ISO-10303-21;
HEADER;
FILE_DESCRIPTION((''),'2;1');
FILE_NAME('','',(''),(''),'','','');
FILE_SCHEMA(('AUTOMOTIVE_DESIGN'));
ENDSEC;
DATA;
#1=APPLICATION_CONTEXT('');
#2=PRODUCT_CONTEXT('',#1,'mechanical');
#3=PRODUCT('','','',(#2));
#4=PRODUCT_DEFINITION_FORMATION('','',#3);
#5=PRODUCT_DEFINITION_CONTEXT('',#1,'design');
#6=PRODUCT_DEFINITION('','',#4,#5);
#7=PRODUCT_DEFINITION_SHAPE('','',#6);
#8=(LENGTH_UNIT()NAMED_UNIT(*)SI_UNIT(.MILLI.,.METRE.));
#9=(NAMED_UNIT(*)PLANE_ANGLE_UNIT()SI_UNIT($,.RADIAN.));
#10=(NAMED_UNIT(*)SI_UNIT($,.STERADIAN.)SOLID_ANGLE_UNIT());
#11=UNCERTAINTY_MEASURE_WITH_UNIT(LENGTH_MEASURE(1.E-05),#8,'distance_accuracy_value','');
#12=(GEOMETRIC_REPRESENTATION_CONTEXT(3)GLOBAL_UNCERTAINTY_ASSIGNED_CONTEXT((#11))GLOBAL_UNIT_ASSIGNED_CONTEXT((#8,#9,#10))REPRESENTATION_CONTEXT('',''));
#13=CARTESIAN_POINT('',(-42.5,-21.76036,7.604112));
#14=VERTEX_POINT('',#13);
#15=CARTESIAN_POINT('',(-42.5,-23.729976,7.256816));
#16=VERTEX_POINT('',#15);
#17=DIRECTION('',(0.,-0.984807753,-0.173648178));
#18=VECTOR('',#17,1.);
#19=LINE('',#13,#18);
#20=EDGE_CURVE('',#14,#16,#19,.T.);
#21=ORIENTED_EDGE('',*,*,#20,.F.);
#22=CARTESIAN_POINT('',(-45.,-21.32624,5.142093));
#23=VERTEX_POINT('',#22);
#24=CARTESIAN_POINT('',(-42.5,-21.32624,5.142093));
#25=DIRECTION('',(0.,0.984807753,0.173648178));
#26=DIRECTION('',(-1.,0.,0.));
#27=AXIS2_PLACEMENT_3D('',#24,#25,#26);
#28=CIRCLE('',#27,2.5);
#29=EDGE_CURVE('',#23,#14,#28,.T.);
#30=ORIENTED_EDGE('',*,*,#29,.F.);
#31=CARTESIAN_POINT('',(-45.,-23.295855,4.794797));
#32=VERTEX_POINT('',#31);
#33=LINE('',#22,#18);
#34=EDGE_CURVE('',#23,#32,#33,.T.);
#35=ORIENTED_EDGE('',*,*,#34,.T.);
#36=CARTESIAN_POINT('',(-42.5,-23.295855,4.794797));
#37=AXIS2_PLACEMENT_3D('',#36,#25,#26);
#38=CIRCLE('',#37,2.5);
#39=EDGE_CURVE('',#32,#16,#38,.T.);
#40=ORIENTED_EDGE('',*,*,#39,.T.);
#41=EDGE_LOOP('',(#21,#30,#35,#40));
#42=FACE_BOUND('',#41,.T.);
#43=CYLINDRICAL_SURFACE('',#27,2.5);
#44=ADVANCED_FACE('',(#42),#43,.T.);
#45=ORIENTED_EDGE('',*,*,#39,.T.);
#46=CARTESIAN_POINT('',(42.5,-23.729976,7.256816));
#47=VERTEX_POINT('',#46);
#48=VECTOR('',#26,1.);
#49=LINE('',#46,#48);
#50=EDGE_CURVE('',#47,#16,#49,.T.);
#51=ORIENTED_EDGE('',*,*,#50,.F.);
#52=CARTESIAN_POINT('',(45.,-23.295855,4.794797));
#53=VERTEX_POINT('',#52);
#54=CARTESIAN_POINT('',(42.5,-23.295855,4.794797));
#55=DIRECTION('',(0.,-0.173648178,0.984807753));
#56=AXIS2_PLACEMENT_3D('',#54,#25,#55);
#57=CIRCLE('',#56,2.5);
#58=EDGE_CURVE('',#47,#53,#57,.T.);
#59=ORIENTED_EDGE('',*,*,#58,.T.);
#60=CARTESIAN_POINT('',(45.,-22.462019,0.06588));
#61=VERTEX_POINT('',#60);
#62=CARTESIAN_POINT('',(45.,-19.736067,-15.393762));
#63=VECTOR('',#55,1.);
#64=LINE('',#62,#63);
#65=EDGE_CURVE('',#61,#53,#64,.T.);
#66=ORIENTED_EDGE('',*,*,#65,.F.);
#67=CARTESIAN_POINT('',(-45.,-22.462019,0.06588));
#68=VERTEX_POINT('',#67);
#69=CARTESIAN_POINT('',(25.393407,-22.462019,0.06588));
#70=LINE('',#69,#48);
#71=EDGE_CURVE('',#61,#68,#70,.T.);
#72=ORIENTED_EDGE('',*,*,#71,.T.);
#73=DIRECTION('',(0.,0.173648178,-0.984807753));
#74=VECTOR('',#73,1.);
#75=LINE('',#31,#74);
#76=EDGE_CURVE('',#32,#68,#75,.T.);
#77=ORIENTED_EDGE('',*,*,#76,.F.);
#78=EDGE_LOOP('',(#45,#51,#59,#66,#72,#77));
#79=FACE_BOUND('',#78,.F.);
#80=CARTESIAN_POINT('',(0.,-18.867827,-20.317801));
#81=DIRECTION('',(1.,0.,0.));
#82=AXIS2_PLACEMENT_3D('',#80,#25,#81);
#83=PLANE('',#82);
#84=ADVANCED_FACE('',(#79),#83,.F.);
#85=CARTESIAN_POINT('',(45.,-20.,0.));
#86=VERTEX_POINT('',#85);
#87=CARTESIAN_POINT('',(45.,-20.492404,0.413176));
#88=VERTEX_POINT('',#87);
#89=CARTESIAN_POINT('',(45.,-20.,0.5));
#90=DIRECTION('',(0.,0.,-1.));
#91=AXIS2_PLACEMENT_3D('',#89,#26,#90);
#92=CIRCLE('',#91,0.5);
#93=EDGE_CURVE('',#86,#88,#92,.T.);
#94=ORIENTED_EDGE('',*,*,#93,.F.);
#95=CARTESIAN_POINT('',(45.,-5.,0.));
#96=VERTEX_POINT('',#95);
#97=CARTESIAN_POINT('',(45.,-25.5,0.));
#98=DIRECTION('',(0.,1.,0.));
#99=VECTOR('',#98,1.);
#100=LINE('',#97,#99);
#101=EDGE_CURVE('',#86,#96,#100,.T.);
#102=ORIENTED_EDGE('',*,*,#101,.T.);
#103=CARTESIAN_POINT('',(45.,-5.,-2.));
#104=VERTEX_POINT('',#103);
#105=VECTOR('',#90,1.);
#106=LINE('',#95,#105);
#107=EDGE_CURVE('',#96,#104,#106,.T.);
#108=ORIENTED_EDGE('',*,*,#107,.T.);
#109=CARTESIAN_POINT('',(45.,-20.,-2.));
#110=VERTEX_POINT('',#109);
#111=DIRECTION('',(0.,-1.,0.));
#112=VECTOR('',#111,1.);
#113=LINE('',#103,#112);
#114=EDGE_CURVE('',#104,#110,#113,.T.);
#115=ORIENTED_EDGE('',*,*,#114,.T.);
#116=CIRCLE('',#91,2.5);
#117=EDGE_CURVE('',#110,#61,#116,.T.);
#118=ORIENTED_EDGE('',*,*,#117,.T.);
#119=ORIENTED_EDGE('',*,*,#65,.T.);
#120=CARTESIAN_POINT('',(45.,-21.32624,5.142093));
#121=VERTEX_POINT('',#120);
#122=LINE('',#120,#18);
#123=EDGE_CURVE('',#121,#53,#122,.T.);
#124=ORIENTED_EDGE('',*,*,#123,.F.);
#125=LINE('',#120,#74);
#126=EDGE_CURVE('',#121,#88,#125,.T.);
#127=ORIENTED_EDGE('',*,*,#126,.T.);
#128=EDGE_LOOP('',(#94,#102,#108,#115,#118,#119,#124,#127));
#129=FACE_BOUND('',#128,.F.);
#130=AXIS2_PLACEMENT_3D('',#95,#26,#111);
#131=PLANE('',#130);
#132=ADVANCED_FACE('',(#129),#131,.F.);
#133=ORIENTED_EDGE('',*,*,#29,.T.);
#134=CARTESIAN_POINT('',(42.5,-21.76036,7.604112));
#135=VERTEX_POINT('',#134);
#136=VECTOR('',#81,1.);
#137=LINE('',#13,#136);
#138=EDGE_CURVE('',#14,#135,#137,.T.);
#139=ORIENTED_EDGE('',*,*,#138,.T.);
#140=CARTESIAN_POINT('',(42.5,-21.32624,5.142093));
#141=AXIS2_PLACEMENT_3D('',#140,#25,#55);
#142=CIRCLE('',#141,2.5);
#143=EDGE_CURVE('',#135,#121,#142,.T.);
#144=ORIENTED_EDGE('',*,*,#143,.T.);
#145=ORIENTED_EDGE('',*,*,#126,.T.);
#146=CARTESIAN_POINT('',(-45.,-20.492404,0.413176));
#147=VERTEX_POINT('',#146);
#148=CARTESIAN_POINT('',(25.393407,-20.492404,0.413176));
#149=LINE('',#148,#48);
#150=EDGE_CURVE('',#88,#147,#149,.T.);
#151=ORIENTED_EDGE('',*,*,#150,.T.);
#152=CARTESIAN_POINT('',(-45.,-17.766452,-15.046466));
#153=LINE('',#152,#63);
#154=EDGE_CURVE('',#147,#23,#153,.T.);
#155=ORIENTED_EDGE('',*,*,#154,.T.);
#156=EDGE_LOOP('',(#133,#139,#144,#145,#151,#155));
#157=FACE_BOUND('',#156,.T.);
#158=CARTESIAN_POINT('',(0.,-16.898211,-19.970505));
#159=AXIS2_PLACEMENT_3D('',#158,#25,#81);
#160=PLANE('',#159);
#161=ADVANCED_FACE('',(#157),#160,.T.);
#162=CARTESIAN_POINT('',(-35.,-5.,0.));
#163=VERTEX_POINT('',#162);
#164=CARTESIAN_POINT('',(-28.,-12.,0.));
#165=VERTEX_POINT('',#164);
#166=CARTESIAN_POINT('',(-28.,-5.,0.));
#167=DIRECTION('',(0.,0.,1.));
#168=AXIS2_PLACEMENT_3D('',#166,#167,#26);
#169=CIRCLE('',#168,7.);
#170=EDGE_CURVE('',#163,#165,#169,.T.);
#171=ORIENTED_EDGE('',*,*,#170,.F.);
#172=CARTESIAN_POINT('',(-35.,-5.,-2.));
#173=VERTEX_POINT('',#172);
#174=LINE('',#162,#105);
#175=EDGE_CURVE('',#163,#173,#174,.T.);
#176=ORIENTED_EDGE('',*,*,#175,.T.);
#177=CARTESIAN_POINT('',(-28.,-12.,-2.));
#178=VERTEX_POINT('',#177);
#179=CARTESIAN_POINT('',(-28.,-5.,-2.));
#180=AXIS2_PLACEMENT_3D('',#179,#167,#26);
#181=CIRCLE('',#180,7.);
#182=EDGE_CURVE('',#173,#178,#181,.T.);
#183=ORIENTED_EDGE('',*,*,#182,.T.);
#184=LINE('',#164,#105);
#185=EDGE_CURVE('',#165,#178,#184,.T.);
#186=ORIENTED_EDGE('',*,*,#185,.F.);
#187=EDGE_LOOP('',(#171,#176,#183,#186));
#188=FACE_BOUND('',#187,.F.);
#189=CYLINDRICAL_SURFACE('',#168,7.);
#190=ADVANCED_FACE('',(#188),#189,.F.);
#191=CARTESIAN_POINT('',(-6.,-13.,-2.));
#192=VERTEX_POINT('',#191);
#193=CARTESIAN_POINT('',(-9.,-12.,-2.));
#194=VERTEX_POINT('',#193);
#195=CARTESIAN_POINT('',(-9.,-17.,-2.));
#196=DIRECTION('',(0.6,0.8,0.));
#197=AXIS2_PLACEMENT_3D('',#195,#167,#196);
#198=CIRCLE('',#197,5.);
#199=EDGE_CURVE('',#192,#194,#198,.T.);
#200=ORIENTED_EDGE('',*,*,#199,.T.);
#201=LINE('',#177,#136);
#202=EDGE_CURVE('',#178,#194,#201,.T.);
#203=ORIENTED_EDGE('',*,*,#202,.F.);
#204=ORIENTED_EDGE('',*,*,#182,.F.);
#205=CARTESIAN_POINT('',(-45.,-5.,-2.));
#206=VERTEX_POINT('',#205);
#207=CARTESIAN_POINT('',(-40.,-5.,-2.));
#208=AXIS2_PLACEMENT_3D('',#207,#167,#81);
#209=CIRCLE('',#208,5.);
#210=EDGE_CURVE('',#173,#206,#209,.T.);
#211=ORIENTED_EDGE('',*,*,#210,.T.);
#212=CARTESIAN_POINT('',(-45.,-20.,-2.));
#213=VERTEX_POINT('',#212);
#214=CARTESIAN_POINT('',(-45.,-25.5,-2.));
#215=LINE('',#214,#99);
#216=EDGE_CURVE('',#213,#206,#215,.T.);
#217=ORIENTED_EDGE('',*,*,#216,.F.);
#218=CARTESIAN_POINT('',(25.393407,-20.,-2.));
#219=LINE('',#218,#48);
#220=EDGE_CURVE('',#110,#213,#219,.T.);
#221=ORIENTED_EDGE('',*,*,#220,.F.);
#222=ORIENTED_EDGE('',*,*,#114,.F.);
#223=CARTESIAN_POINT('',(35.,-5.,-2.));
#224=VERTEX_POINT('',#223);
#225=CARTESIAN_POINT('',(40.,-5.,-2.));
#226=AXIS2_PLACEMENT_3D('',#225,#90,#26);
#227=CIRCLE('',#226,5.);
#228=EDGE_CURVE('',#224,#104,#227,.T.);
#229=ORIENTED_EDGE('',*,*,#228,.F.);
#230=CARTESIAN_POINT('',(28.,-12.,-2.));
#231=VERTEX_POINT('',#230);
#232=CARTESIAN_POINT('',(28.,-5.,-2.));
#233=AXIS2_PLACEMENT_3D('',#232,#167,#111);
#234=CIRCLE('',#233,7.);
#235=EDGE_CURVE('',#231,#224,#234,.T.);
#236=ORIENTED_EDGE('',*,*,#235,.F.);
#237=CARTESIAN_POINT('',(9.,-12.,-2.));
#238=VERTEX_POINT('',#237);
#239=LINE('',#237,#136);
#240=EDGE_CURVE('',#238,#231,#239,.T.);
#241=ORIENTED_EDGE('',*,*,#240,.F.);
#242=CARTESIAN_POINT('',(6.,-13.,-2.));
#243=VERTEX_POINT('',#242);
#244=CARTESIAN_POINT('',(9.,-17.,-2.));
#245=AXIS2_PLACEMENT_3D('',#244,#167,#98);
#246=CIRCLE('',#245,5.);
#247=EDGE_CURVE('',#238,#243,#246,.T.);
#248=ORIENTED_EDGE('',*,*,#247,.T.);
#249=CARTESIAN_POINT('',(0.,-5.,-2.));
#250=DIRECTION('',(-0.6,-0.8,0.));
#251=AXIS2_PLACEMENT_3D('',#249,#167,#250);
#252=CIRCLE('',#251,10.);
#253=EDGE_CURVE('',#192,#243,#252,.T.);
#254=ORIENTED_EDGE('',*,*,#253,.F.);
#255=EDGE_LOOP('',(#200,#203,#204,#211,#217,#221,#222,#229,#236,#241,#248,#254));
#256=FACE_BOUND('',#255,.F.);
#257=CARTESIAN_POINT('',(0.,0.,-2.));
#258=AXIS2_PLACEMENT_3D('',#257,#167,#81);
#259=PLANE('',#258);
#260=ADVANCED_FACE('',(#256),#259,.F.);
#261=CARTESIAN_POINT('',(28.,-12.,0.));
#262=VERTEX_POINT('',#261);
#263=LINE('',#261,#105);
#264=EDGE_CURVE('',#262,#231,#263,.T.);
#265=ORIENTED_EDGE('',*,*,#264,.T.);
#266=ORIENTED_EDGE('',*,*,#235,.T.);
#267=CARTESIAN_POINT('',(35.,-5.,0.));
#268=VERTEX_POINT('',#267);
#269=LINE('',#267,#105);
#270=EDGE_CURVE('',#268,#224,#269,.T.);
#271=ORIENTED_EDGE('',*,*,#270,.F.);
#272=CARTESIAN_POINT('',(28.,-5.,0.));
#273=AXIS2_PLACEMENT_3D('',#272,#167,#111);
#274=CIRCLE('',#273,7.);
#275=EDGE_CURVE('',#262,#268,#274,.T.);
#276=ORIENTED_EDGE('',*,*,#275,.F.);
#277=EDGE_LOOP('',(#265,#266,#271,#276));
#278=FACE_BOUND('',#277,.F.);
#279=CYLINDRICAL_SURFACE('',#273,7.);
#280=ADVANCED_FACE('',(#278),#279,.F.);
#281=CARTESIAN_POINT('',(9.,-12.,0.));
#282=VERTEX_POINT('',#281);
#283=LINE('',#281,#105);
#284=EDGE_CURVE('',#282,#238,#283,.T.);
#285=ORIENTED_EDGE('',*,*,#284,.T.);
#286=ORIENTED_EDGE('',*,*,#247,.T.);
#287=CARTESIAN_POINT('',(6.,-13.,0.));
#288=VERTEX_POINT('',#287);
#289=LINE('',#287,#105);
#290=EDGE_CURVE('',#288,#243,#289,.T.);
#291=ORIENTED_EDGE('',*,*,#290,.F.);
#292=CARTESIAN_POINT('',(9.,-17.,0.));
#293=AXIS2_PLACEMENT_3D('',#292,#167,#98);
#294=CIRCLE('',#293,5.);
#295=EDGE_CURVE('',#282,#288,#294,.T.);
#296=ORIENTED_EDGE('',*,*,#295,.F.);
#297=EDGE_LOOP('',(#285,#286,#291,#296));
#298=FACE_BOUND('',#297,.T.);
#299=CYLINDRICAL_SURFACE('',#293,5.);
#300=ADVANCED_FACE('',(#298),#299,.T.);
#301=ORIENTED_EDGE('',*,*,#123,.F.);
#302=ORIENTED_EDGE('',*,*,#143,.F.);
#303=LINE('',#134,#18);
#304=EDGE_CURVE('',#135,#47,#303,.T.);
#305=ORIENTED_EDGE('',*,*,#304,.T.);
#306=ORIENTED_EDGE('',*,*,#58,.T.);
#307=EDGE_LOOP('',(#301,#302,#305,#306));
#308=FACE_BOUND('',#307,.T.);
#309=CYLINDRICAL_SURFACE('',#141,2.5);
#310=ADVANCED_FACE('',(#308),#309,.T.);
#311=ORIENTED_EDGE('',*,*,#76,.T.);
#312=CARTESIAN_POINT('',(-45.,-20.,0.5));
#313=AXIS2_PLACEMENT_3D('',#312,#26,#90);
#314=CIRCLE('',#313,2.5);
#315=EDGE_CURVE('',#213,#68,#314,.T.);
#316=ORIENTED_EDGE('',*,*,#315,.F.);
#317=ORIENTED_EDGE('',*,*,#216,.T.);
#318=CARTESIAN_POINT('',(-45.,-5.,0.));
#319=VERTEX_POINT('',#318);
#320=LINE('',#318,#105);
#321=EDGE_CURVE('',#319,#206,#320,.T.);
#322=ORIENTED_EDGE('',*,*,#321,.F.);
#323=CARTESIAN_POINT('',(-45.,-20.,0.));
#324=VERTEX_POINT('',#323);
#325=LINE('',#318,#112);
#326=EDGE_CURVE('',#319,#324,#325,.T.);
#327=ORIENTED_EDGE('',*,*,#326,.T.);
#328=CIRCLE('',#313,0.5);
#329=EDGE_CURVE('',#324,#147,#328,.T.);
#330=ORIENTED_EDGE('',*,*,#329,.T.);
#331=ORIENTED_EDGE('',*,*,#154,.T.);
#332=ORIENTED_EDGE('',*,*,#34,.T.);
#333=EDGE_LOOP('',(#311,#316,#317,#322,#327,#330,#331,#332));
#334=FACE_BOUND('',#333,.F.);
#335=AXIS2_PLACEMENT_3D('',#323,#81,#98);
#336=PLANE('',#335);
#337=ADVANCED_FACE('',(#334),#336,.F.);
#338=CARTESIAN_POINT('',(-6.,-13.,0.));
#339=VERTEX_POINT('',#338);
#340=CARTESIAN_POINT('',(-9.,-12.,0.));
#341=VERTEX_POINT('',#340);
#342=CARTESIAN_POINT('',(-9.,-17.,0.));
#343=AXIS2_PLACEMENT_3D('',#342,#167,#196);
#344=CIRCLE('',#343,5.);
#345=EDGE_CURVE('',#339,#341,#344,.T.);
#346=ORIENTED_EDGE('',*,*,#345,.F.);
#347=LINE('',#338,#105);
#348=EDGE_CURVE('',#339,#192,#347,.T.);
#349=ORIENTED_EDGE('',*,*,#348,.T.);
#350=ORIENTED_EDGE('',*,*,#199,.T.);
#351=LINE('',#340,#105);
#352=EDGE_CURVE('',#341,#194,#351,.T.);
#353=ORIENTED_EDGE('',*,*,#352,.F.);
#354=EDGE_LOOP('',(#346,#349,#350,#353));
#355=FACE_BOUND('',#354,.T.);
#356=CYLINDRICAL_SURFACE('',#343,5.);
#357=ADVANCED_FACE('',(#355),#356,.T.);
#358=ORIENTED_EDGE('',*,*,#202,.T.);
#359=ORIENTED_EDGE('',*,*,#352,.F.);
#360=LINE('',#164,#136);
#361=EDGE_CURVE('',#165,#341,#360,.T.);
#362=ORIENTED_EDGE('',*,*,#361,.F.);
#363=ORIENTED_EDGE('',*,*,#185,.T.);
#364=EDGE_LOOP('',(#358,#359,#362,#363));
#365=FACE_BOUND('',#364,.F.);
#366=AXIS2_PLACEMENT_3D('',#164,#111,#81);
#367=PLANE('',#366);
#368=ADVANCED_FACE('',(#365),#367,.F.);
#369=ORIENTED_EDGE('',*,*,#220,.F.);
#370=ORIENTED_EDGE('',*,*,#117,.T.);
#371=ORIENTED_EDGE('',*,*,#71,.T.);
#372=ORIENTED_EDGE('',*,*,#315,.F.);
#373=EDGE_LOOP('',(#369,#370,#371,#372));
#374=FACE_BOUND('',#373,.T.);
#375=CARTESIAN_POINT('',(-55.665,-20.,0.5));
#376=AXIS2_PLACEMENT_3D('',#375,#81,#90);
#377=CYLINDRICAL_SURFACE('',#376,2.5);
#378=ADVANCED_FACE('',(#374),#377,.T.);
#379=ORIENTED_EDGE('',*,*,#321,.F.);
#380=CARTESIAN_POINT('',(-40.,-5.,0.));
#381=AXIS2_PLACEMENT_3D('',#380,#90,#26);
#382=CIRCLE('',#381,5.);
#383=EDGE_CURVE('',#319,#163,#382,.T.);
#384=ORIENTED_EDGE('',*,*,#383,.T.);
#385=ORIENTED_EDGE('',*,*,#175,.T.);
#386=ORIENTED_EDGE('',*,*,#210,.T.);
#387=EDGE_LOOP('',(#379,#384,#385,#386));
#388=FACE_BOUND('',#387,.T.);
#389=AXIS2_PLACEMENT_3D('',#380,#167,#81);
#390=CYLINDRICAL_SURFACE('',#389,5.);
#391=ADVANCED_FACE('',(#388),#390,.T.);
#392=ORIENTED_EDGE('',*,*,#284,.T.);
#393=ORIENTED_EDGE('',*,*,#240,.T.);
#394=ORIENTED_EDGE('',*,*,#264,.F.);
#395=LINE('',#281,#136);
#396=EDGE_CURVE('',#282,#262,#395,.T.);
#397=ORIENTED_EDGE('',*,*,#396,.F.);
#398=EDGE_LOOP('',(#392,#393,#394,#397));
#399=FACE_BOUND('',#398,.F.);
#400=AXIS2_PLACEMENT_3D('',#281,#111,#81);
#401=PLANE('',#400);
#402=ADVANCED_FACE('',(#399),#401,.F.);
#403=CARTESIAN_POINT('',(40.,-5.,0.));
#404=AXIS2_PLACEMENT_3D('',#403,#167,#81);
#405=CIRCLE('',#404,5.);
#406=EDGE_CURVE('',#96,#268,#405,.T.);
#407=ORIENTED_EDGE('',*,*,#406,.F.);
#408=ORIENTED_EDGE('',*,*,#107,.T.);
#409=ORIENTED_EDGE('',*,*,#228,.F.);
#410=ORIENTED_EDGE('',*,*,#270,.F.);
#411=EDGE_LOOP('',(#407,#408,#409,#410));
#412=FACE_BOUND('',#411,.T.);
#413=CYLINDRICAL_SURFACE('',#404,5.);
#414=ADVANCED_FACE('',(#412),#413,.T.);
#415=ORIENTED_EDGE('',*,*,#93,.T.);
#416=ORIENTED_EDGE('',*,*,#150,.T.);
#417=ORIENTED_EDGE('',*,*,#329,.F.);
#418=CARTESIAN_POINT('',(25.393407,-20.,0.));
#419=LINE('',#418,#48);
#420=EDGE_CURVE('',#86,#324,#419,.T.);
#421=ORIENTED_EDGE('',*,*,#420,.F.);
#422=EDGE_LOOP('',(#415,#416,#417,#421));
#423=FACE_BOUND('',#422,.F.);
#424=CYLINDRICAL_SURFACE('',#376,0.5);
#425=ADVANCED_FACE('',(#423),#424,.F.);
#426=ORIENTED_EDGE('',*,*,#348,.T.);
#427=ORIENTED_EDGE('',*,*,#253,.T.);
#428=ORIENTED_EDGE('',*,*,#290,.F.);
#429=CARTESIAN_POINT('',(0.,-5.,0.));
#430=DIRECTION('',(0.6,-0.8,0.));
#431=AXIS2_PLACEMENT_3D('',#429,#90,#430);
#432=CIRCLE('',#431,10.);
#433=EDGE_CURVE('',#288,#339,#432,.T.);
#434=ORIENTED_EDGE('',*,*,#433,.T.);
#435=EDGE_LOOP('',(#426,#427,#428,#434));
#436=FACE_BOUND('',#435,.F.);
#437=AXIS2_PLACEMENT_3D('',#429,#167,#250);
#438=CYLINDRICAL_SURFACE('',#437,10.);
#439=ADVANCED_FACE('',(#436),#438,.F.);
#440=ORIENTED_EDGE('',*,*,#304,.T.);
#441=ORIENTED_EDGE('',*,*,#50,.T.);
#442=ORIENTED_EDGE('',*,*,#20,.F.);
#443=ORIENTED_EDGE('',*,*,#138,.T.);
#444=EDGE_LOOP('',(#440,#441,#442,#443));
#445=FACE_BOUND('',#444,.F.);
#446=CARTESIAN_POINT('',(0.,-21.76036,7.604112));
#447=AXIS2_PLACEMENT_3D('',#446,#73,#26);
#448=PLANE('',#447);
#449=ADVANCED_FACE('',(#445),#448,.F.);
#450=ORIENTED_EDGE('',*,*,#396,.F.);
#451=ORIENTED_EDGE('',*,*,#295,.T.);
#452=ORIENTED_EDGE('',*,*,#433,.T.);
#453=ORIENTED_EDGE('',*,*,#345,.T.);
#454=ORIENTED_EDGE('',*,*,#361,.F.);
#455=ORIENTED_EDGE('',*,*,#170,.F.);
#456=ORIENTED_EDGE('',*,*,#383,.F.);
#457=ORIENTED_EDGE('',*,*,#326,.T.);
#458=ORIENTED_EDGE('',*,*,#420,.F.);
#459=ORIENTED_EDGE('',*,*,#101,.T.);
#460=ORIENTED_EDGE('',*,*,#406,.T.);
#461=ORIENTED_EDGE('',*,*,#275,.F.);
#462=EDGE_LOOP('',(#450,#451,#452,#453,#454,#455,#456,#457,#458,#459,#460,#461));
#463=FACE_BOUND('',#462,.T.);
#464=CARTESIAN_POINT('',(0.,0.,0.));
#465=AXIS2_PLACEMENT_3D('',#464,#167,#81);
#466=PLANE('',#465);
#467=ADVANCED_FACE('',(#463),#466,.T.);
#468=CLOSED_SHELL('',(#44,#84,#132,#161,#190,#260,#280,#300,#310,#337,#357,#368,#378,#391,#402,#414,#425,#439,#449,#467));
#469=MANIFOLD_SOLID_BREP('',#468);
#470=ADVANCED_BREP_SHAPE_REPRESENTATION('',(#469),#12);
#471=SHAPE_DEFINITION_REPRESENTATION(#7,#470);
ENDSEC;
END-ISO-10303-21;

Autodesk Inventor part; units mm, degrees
ref_plane "YZ Plane" through (0, 0, 0) normal (1, 0, 0) x (0, 1, 0)
ref_plane "XZ Plane" through (0, 0, 0) normal (0, 1, 0) x (-1, 0, 0)
ref_plane "XY Plane" through (0, 0, 0) normal (0, 0, 1) x (1, 0, 0)
sketch "草圖1" plane through (0, 0, 0) normal (0, 0, 1) x (1, 0, 0)
  line L0 (-163.791, 0) -> (203.4358, 0) projected
  line L1 (0, 6.9462) -> (0, -34.4284) projected
  line L2 (-40, 0) -> (-40, 0)
  line L3 (45, -5) -> (45, -25.5)
  line L4 (42.5, -28) -> (-42.5, -28)
  line L5 (-45, -25.5) -> (-45, -5)
  line L6 (-111.33, -20) -> (150.9748, -20)
  arc A0 (-45, -25.5) -> (-42.5, -28) centre (-42.5, -25.5) ccw
  arc A1 (42.5, -28) -> (45, -25.5) centre (42.5, -25.5) ccw
  line L7 (-35, -5) -> (-35, -5)
  line L8 (-28, -12) -> (-9, -12)
  line L9 (35, -5) -> (35, -5)
  line L10 (-35, 0) -> (35, 0) construction
  line L11 (40, 0) -> (40, 0)
  arc A2 (-40, 0) -> (-45, -5) centre (-40, -5) ccw
  arc A3 (45, -5) -> (40, 0) centre (40, -5) ccw
  arc A4 (-35, -5) -> (-40, 0) centre (-40, -5) ccw
  arc A5 (40, 0) -> (35, -5) centre (40, -5) ccw
  arc A6 (-35, -5) -> (-28, -12) centre (-28, -5) ccw
  arc A7 (28, -12) -> (35, -5) centre (28, -5) ccw
  circle A8 centre (-40, -5) radius 1.4
  circle A9 centre (40, -5) radius 1.4
  line L12 (-7.5, -12) -> (7.5, -12) construction
  line L13 (9, -12) -> (28, -12)
  line L14 (0, -18.0742) -> (0, 0) construction
  arc A10 (-6, -13) -> (6, -13) centre (0, -5) ccw
  arc A11 (-6, -13) -> (-9, -12) centre (-9, -17) ccw
  arc A12 (9, -12) -> (6, -13) centre (9, -17) ccw
  point P0 (-45, 0)
  point P1 (45, -28)
  point P2 (45, 0)
  point P3 (-45, -28)
  point P4 (-40, 0)
  point P5 (40, 0)
  point P6 (-7.1414, -12)
  point P7 (7.1414, -12)
  dimension "d0" = 90
  dimension "d1" = 8
  dimension "d2" = 20
  dimension "d6" = 2.5
  dimension "d7" = 5
  dimension "d8" = 5
  dimension "d9" = 8
  dimension "d10" = 10
  dimension "d11" = 7
  dimension "d12" = 2.8
  dimension "d19" = 5
  dimension "d20" = 5
  dimension "d21" = 10
  dimension "d22" = 15
extrude "平板1" add sketch "草圖1" against normal blind 2 contours A4 A6 L8 A11 A10 L1 L6 L5 A2 | A3 L3 L6 L1 A10 A12 L13 A7 A5 | L6 L1 L4 A0 L5 | L6 L3 A1 L4 L1 | A8 | A9
bend part "折彎零件1" radius 0.5 angle 80 line through (-111.33, -20, 0) along (1, 0, 0) centre toward (0, 0, 1) moving side (0, -1, 0) both sides no
sketch "草圖2" plane through (-45, -22.462, 0.0659) normal (0, -0.9848078, -0.1736482) x (1, 0, 0)
  line L0 (0, 0) -> (90, 0) projected
  line L1 (90, 4.8019) -> (90, 0) projected
  arc A0 (90, 4.8019) -> (87.5, 7.3019) centre (87.5, 4.8019) ccw projected
  line L2 (2.5, 7.3019) -> (87.5, 7.3019) projected
  arc A1 (2.5, 7.3019) -> (0, 4.8019) centre (2.5, 4.8019) ccw projected
  line L3 (0, 0) -> (0, 4.8019) projected
  line L4 (95.0452, 16.6838) -> (-5.2412, 16.6838)
  line L5 (-5.2412, 16.6838) -> (-5.2412, 5.3019)
  line L6 (-5.2412, 5.3019) -> (95.0452, 5.3019)
  line L7 (95.0452, 5.3019) -> (95.0452, 16.6838)
  point P0 (45, -3.9654)
  dimension "d23" = 2
feature "手工切割" [suppressed]
equation "\"d24\" = 厚度"
equation "\"d3\" = 厚度"
equation "\"折彎半徑\" = 厚度"
equation "\"折彎離隙寬度\" = 厚度"
equation "\"折彎離隙深度\" = 0.5 * 厚度"
equation "\"轉角離隙大小\" = 4 * 厚度"
equation "\"最小剩餘\" = 2 * 厚度"
equation "\"轉移半徑\" = 折彎半徑"
equation "\"Jacobi半徑大小\" = 折彎半徑"
equation "\"間隙大小\" = 厚度"
equation "\"厚度\" = 2"
properties part number "補角片" material "不鏽鋼"
